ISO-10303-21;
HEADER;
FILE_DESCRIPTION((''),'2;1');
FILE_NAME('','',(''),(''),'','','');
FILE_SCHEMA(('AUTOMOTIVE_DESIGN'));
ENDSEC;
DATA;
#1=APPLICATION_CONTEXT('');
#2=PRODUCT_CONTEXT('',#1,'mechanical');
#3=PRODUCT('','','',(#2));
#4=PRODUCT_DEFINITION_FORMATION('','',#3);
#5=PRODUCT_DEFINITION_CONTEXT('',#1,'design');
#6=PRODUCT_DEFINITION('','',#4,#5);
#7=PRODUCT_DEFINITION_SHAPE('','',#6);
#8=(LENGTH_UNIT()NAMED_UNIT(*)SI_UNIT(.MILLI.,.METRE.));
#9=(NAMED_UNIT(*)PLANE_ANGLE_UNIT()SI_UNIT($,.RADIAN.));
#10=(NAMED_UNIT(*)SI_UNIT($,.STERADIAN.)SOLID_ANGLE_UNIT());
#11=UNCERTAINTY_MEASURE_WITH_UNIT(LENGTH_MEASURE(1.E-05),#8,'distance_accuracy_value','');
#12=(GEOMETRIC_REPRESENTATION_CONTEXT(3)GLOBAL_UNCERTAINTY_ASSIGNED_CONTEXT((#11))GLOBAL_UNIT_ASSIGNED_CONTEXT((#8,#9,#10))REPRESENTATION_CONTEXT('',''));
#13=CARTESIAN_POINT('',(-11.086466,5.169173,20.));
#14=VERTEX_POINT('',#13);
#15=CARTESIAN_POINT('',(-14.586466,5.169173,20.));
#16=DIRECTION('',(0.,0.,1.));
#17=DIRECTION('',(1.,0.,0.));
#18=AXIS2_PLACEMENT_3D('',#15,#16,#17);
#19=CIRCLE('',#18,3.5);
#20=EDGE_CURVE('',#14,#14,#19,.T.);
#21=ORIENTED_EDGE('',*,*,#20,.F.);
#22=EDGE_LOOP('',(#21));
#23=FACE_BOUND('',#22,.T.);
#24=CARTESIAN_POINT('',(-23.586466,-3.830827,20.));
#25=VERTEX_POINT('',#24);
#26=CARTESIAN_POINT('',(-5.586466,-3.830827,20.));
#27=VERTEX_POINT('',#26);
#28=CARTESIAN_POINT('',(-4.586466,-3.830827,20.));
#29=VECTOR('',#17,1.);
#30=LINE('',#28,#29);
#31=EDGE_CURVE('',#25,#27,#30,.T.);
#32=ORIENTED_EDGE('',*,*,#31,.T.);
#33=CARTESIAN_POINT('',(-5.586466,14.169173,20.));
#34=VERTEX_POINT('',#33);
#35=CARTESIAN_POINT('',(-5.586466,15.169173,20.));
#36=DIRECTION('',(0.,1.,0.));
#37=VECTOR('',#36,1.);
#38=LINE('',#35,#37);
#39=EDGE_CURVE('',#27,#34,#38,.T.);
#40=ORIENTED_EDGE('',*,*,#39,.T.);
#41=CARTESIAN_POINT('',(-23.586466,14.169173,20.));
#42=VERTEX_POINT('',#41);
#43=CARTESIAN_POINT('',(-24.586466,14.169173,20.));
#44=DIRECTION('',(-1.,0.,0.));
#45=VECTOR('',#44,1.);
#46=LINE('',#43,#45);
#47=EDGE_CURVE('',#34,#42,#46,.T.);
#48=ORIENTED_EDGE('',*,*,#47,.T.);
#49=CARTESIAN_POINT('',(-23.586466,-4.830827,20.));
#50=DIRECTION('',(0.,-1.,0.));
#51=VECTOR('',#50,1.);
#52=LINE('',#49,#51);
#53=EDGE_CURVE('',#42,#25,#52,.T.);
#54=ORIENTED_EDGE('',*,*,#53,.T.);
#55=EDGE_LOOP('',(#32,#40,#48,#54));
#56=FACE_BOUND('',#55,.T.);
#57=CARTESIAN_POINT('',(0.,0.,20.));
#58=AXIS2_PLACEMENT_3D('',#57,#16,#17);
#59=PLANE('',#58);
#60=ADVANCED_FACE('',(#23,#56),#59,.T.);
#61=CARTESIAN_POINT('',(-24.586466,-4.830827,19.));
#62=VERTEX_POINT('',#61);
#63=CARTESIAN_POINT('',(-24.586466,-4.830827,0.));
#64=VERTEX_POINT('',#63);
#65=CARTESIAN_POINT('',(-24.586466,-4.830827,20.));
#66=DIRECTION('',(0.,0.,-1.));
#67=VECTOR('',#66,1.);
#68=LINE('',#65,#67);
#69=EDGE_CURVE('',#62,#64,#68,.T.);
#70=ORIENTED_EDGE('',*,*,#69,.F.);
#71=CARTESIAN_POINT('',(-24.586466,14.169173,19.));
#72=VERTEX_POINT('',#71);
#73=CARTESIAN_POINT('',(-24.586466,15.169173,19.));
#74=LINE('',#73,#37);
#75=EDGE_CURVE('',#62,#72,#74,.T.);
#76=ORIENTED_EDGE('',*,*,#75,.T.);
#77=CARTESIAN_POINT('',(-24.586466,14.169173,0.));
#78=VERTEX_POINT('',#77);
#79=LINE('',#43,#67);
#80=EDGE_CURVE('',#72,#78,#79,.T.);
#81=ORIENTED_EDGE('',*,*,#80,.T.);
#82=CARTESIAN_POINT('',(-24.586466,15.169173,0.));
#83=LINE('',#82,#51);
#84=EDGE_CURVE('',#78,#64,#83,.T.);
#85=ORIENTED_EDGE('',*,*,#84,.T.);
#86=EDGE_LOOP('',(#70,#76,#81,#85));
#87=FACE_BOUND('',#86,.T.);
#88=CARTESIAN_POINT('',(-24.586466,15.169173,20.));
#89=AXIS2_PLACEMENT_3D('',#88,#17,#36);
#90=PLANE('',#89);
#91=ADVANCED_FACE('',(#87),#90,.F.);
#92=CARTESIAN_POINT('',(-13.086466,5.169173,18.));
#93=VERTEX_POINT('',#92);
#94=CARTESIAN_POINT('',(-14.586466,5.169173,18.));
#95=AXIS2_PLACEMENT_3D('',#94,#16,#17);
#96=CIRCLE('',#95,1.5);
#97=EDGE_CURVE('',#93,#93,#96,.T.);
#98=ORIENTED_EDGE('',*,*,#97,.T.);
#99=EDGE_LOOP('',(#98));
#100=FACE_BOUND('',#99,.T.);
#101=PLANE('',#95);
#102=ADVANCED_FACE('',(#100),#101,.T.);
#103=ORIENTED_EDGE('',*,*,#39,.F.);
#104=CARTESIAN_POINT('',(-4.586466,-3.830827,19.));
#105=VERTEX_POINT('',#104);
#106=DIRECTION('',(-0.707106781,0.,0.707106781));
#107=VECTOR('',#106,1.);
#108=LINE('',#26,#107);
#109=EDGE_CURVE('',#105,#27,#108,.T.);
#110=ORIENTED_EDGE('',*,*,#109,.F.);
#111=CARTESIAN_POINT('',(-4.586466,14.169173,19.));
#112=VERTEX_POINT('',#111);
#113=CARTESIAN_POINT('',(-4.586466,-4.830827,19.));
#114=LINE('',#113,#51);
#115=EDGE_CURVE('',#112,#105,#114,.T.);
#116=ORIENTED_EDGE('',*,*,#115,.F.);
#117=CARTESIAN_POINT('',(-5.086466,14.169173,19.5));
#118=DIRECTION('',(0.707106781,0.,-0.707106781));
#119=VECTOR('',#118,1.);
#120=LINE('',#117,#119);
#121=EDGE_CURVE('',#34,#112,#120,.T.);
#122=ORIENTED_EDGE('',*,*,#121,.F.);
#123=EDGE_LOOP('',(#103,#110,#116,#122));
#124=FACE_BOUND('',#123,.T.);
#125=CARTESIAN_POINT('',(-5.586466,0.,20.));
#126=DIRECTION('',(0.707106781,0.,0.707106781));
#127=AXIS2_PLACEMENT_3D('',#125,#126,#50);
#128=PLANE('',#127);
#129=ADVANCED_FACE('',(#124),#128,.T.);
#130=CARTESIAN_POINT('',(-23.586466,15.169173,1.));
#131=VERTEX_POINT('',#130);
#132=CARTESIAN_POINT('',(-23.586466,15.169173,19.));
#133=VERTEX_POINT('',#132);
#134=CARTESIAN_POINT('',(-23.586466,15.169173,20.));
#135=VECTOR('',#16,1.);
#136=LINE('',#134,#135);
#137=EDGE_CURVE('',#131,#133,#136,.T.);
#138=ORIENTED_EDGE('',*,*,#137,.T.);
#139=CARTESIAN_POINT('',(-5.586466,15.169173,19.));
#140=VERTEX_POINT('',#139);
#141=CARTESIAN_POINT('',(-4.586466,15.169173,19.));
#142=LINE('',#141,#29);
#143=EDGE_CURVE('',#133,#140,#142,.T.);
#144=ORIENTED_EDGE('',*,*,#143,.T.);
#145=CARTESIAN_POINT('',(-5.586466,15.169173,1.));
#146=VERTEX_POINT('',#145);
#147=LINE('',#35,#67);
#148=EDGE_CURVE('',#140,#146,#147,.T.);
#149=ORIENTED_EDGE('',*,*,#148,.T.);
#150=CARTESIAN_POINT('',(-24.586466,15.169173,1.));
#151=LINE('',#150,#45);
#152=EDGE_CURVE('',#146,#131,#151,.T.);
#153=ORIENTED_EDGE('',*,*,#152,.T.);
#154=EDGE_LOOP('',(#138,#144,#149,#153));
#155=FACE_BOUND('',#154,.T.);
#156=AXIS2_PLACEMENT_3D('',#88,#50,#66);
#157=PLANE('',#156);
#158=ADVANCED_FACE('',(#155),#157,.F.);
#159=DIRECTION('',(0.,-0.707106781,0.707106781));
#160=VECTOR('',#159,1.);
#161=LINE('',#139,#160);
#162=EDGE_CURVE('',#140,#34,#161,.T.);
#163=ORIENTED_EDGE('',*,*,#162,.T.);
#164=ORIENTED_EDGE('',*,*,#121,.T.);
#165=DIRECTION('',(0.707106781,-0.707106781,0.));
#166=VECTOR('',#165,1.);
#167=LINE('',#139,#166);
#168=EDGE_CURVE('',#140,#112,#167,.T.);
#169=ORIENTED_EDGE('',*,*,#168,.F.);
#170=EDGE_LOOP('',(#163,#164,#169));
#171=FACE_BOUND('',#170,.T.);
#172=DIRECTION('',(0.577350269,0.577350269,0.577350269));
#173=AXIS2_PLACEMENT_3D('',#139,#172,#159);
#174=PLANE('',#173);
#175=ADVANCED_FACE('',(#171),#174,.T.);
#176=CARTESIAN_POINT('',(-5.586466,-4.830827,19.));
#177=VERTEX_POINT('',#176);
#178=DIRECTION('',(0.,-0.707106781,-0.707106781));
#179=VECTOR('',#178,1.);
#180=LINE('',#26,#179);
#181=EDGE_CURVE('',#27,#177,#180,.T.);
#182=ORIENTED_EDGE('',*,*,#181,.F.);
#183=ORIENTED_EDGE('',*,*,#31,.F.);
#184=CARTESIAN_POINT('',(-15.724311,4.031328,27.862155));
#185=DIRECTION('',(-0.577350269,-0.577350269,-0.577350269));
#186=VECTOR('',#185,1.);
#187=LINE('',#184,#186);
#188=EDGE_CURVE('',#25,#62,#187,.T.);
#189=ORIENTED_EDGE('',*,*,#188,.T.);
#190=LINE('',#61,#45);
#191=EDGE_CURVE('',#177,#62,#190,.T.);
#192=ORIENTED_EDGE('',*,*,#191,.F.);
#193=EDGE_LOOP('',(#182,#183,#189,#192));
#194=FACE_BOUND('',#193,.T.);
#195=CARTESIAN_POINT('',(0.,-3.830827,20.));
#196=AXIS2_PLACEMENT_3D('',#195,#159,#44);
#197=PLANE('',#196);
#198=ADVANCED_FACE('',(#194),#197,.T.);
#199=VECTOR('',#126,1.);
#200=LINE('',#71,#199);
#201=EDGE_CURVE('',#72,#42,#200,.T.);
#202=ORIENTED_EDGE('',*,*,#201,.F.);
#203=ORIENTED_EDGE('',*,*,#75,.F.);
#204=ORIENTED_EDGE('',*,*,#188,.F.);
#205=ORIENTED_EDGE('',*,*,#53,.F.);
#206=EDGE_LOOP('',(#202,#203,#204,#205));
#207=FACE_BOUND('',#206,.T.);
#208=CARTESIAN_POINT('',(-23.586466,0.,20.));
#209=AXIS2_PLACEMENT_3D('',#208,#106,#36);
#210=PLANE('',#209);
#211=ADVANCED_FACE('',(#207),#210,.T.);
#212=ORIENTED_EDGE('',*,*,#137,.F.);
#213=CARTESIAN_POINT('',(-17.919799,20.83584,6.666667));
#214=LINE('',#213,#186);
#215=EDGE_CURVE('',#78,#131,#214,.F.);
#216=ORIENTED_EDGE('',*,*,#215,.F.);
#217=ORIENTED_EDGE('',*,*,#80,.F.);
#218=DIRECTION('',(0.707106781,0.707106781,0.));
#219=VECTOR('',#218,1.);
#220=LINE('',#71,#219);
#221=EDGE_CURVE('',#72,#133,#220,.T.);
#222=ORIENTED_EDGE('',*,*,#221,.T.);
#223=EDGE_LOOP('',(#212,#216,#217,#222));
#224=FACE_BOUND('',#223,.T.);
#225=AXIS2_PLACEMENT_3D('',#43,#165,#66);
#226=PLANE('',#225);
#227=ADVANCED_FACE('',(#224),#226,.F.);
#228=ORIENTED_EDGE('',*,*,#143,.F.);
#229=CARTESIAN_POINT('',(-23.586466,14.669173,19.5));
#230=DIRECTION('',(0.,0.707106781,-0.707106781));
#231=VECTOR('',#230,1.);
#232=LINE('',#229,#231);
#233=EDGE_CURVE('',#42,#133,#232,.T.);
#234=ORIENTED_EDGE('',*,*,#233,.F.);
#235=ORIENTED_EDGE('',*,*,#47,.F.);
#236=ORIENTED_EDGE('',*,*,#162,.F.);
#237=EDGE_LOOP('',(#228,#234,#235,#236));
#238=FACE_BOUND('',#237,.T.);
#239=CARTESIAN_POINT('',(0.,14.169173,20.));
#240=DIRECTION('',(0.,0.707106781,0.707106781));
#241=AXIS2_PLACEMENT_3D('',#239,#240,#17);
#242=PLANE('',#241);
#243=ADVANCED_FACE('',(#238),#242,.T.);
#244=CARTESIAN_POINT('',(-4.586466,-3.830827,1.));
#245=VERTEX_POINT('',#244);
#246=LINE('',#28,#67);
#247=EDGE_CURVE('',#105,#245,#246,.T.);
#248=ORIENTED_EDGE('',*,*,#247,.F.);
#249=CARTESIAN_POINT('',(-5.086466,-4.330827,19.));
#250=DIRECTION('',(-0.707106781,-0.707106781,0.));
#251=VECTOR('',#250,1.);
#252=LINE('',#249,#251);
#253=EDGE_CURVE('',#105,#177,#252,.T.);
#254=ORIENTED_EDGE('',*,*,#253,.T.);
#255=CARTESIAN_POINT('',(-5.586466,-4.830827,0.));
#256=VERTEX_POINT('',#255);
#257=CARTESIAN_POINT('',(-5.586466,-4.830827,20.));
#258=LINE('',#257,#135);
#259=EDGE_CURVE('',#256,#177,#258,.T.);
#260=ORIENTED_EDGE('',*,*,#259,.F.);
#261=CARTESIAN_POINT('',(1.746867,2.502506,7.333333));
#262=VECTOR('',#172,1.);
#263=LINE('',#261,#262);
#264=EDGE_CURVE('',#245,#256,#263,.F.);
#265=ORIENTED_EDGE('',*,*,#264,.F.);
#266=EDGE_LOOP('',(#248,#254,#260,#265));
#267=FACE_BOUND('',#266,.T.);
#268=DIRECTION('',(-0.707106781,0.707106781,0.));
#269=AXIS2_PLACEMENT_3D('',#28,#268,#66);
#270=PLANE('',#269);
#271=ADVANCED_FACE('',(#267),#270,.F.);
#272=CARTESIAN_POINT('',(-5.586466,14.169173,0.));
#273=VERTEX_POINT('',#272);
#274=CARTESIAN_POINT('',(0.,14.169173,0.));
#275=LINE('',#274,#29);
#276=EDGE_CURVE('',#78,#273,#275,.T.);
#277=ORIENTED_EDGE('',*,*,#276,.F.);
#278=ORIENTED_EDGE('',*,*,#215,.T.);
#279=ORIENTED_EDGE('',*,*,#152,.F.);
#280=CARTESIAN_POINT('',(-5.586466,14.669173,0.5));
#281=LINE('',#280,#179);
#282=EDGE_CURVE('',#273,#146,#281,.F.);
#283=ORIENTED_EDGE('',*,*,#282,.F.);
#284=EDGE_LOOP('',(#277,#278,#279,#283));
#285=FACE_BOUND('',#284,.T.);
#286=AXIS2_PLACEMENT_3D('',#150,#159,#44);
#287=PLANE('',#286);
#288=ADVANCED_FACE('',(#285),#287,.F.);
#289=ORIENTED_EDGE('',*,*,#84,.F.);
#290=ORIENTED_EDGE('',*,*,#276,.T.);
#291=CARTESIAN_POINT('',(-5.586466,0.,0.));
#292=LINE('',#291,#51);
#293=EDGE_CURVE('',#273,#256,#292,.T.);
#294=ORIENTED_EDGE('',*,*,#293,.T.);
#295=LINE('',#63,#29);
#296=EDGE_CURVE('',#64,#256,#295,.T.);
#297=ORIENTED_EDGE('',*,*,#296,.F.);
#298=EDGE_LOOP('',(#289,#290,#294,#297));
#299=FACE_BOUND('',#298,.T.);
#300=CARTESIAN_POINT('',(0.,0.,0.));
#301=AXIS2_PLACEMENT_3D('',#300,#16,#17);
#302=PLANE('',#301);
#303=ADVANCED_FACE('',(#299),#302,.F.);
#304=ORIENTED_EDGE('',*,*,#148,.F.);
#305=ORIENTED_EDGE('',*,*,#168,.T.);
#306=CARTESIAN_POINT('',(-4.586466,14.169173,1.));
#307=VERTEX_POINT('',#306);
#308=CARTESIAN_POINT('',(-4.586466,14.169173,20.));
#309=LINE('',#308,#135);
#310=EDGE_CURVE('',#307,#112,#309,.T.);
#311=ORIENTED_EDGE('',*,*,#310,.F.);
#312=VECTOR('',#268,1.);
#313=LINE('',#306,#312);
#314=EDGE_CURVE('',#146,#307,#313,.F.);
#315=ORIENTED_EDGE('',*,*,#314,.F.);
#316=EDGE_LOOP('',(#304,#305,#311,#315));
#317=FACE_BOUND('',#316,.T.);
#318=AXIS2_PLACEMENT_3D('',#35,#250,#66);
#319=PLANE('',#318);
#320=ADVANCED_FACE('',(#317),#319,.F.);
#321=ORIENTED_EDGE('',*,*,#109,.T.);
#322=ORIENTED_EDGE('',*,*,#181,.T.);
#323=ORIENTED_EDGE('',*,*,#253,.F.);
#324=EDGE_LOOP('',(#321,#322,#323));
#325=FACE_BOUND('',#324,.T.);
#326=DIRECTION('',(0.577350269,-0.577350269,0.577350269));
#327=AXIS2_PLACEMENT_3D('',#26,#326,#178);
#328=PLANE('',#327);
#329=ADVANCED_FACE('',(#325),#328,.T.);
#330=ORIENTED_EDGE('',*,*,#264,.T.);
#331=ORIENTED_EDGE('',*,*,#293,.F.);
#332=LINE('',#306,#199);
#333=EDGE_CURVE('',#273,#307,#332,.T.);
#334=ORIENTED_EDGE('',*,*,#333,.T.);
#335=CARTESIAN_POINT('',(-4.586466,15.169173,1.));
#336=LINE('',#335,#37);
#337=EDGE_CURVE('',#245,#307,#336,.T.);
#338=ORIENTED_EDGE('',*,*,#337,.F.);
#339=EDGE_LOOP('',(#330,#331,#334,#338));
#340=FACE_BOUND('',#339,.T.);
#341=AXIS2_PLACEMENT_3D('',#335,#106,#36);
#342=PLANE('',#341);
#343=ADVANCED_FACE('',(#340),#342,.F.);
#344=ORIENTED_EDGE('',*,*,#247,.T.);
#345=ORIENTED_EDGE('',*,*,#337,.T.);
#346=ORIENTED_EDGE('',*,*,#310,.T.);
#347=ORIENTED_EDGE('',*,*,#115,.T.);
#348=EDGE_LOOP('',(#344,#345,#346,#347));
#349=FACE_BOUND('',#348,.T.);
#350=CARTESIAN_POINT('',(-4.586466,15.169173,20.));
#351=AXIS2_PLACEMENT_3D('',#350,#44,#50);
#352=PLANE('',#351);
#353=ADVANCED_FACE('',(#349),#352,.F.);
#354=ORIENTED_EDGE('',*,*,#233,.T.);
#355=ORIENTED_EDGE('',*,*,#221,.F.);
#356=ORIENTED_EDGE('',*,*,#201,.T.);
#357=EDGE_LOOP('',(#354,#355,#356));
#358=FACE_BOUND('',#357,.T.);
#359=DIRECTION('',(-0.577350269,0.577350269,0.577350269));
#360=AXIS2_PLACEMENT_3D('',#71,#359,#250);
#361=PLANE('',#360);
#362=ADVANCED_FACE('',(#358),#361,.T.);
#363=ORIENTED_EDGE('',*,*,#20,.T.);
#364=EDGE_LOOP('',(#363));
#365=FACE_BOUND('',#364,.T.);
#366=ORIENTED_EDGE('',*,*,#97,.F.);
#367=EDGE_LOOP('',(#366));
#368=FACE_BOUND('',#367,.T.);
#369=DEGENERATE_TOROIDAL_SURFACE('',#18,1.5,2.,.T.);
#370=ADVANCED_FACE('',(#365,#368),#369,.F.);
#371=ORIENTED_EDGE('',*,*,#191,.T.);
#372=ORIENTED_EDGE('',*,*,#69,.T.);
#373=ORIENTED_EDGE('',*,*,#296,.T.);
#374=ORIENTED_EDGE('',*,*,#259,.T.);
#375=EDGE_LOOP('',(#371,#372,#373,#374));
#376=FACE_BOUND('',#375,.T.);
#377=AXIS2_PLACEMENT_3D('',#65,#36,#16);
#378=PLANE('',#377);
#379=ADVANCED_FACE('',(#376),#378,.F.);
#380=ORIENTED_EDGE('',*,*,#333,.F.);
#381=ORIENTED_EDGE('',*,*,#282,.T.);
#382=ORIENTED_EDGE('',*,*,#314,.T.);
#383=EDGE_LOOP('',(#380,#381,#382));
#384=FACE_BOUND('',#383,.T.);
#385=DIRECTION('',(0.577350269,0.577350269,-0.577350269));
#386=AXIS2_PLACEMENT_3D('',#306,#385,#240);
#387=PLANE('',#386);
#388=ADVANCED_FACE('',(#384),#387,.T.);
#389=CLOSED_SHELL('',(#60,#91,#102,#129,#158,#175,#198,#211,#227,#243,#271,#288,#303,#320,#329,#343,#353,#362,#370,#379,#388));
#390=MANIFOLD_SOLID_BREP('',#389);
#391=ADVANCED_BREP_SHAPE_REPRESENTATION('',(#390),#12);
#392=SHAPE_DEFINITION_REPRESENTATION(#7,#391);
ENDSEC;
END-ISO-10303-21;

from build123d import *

# Parameters (mm, degrees)
SKETCH_2_W          = 20
SKETCH_2_H          = 20
EXTRUDE_1_DEPTH     = 20
CHAMFER_2_SIZE      = 1
SKETCH_3_R          = 3.5
CUT_EXTRUDE_1_DEPTH = 2
FILLET_1_R          = 2


with BuildPart() as part:
    # ｽｹｯﾁ2 → ﾎﾞｽ - 押し出し1 (new body)
    with BuildSketch(Plane.XY):
        with Locations((-14.586466165, 5.169172932)):
            Rectangle(SKETCH_2_W, SKETCH_2_H)
    extrude(amount=EXTRUDE_1_DEPTH)

    # 面取り2
    chamfer_2_edges = [part.edges().sort_by_distance(p)[0] for p in [
        (-4.586466165, 5.169172932, 20),
        (-14.586466165, 15.169172932, 20),
        (-24.586466165, 5.169172932, 20),
        (-14.586466165, 15.169172932, 0),
        (-4.586466165, 5.169172932, 0),
        (-24.586466165, 15.169172932, 10),
        (-4.586466165, 15.169172932, 10),
        (-4.586466165, -4.830827068, 10),
        (-14.586466165, -4.830827068, 20),
    ]]
    chamfer(chamfer_2_edges, length=CHAMFER_2_SIZE)

    # ｽｹｯﾁ3 → ｶｯﾄ - 押し出し1 (cut)
    with BuildSketch(Plane.XY.offset(20)):
        with Locations((-14.586466165, 5.169172932)):
            Circle(SKETCH_3_R)
    extrude(amount=-CUT_EXTRUDE_1_DEPTH, mode=Mode.SUBTRACT)

    # ﾌｨﾚｯﾄ1
    fillet_1_edges = [part.edges().sort_by_distance(p)[0] for p in [
        (-18.086466165, 5.169172932, 18),
    ]]
    fillet(fillet_1_edges, radius=FILLET_1_R - 0.0001)  # a hair under: the kernel refuses the full size


solid = part.part
